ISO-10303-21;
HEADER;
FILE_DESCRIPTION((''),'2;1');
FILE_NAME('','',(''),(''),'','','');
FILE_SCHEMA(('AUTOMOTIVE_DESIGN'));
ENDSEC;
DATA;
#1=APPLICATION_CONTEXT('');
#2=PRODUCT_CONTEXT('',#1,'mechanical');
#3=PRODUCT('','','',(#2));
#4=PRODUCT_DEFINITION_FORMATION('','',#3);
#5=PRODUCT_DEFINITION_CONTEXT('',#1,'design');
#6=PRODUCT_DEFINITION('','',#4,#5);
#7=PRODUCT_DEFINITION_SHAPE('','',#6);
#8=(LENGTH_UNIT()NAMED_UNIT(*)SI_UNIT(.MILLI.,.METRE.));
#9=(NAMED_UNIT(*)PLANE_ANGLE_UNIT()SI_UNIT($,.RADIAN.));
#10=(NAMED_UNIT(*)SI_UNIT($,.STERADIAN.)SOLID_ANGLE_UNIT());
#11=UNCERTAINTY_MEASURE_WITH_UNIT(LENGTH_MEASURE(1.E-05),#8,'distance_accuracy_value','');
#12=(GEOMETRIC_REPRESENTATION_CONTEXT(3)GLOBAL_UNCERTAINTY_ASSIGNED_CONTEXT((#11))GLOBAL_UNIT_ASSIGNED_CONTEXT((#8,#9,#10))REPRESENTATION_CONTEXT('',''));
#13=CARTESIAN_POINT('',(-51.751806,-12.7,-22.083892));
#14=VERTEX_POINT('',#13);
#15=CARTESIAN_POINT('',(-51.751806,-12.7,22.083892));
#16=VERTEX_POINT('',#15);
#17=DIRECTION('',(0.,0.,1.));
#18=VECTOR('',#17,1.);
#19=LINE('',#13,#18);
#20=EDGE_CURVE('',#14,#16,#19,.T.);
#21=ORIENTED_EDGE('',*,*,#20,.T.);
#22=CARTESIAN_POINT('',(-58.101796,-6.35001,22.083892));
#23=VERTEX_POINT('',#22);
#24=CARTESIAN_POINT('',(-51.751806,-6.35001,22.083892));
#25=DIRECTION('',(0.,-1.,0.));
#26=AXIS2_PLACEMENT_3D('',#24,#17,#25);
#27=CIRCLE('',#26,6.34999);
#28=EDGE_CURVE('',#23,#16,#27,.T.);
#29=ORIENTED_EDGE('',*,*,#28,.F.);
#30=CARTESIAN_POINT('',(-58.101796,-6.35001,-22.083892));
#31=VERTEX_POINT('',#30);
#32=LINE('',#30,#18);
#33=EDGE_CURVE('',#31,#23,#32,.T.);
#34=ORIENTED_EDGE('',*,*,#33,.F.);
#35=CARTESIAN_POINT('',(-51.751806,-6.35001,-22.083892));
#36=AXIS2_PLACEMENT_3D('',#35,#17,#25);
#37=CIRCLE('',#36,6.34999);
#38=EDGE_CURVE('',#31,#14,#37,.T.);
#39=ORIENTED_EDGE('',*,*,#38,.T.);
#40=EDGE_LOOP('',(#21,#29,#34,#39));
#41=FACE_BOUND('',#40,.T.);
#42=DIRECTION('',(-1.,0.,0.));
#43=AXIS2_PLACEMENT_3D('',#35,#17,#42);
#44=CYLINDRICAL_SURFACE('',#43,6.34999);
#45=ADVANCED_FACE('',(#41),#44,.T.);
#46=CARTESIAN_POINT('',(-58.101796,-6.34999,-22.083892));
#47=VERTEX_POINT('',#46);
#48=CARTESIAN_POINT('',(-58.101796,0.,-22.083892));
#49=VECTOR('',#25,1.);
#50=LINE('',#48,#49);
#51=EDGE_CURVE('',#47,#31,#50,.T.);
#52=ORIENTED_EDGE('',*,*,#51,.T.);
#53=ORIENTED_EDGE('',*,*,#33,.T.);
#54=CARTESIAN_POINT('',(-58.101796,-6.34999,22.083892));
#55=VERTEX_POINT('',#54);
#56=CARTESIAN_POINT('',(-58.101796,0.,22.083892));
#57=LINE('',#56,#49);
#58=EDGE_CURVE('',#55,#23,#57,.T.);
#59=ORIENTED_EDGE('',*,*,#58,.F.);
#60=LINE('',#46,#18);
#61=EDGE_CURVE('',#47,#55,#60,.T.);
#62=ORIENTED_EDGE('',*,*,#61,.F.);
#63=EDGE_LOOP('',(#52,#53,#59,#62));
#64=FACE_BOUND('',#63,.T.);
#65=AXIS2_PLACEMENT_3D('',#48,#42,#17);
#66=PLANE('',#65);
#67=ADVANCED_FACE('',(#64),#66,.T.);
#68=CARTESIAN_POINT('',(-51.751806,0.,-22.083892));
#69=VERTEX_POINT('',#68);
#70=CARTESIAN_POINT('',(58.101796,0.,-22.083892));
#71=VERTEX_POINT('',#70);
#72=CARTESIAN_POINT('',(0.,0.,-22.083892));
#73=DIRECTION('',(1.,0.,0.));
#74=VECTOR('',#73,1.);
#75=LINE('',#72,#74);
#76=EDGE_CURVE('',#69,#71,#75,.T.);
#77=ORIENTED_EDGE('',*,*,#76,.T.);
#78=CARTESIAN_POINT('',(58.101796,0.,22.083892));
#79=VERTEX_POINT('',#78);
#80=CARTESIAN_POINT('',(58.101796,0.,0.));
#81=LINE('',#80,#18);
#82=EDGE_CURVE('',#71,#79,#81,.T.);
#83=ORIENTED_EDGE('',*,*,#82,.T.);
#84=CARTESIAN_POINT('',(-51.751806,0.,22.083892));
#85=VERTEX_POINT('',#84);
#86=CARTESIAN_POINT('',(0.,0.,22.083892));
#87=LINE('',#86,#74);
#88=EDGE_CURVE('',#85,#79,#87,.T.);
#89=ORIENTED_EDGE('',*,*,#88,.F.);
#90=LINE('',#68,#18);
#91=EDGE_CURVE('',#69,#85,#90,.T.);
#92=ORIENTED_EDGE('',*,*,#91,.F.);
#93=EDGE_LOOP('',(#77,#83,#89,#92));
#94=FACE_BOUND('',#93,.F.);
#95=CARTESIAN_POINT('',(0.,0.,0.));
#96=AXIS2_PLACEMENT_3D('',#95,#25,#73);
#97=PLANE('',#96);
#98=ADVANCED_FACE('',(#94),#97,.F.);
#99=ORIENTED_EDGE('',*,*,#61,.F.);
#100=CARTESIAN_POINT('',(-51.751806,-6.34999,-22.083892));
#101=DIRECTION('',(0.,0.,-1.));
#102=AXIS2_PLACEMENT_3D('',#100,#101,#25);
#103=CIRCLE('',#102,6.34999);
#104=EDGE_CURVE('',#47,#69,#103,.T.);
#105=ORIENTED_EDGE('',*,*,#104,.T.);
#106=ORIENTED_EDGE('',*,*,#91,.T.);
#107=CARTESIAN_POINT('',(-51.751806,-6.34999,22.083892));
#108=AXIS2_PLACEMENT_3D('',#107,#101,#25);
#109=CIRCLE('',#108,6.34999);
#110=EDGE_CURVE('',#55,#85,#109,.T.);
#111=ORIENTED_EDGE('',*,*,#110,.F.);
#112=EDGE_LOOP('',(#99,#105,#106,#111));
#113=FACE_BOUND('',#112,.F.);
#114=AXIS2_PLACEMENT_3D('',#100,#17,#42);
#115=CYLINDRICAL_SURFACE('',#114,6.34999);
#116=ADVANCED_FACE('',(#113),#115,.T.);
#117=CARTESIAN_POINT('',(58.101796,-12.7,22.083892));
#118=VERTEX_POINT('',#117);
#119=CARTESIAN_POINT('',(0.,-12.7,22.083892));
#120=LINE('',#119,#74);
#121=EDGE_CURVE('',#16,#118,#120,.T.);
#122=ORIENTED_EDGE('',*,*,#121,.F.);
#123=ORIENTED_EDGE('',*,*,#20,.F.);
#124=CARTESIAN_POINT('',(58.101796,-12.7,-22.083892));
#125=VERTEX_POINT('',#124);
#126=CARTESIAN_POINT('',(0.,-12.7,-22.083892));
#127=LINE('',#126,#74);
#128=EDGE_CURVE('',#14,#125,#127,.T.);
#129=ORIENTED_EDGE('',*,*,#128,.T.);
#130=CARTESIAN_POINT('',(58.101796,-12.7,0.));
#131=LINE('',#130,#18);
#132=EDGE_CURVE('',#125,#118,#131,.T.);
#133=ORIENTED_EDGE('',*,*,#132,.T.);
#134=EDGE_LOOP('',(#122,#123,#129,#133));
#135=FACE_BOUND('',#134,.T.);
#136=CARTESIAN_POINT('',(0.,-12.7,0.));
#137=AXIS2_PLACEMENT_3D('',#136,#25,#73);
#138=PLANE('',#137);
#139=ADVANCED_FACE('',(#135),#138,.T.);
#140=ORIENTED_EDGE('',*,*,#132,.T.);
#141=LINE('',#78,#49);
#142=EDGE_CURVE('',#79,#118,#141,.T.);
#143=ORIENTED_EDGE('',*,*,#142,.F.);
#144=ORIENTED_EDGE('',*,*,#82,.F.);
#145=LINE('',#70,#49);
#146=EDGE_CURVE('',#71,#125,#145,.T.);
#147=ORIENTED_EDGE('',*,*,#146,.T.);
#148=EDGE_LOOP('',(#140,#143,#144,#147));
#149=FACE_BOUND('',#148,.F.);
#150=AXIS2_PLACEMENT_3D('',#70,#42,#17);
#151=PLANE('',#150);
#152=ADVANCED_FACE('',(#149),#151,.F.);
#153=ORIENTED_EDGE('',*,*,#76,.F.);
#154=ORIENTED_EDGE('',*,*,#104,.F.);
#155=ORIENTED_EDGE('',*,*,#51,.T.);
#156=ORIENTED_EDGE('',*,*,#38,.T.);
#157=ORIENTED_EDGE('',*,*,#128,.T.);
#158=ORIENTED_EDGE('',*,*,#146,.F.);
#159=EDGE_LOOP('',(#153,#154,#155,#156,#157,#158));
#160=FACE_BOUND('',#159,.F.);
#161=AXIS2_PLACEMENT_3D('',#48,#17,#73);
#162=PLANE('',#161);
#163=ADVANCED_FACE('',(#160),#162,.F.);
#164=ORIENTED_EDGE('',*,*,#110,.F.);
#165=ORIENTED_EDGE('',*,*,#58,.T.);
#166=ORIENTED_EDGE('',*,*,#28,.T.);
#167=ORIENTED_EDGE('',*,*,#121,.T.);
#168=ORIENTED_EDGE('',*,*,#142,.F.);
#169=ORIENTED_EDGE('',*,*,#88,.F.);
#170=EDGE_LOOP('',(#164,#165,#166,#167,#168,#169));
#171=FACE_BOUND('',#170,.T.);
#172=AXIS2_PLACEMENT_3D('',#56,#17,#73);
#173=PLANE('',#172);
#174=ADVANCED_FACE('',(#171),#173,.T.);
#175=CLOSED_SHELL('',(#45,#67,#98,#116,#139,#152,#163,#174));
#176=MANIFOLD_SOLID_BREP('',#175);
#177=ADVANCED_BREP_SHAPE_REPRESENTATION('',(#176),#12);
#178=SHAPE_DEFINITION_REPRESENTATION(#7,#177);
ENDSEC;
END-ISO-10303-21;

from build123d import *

# Parameters (mm, degrees)
F0_W     = 116.2035912275
F0_H     = 44.1677831113
F1_DEPTH = 12.7
F2_R     = 6.34999


# Not quite as in the source:
# - a fillet or chamfer is up to 0.001 mm smaller than in the source, because OpenCascade refuses the exact size


with BuildPart() as f1:
    # F0 (on Front) → F1 (new body)
    with BuildSketch(Plane.XZ):
        Rectangle(F0_W, F0_H)
    extrude(amount=F1_DEPTH)

    # F2 (radius 6.35 in the source; OpenCascade refuses exactly that, so slightly less here)
    f2_edges = [f1.edges().sort_by_distance(p)[0] for p in [
        (-58.101796, 0, 0),
        (-58.101796, -12.7, 0),
    ]]
    fillet(f2_edges, radius=F2_R)


solid = f1.part
